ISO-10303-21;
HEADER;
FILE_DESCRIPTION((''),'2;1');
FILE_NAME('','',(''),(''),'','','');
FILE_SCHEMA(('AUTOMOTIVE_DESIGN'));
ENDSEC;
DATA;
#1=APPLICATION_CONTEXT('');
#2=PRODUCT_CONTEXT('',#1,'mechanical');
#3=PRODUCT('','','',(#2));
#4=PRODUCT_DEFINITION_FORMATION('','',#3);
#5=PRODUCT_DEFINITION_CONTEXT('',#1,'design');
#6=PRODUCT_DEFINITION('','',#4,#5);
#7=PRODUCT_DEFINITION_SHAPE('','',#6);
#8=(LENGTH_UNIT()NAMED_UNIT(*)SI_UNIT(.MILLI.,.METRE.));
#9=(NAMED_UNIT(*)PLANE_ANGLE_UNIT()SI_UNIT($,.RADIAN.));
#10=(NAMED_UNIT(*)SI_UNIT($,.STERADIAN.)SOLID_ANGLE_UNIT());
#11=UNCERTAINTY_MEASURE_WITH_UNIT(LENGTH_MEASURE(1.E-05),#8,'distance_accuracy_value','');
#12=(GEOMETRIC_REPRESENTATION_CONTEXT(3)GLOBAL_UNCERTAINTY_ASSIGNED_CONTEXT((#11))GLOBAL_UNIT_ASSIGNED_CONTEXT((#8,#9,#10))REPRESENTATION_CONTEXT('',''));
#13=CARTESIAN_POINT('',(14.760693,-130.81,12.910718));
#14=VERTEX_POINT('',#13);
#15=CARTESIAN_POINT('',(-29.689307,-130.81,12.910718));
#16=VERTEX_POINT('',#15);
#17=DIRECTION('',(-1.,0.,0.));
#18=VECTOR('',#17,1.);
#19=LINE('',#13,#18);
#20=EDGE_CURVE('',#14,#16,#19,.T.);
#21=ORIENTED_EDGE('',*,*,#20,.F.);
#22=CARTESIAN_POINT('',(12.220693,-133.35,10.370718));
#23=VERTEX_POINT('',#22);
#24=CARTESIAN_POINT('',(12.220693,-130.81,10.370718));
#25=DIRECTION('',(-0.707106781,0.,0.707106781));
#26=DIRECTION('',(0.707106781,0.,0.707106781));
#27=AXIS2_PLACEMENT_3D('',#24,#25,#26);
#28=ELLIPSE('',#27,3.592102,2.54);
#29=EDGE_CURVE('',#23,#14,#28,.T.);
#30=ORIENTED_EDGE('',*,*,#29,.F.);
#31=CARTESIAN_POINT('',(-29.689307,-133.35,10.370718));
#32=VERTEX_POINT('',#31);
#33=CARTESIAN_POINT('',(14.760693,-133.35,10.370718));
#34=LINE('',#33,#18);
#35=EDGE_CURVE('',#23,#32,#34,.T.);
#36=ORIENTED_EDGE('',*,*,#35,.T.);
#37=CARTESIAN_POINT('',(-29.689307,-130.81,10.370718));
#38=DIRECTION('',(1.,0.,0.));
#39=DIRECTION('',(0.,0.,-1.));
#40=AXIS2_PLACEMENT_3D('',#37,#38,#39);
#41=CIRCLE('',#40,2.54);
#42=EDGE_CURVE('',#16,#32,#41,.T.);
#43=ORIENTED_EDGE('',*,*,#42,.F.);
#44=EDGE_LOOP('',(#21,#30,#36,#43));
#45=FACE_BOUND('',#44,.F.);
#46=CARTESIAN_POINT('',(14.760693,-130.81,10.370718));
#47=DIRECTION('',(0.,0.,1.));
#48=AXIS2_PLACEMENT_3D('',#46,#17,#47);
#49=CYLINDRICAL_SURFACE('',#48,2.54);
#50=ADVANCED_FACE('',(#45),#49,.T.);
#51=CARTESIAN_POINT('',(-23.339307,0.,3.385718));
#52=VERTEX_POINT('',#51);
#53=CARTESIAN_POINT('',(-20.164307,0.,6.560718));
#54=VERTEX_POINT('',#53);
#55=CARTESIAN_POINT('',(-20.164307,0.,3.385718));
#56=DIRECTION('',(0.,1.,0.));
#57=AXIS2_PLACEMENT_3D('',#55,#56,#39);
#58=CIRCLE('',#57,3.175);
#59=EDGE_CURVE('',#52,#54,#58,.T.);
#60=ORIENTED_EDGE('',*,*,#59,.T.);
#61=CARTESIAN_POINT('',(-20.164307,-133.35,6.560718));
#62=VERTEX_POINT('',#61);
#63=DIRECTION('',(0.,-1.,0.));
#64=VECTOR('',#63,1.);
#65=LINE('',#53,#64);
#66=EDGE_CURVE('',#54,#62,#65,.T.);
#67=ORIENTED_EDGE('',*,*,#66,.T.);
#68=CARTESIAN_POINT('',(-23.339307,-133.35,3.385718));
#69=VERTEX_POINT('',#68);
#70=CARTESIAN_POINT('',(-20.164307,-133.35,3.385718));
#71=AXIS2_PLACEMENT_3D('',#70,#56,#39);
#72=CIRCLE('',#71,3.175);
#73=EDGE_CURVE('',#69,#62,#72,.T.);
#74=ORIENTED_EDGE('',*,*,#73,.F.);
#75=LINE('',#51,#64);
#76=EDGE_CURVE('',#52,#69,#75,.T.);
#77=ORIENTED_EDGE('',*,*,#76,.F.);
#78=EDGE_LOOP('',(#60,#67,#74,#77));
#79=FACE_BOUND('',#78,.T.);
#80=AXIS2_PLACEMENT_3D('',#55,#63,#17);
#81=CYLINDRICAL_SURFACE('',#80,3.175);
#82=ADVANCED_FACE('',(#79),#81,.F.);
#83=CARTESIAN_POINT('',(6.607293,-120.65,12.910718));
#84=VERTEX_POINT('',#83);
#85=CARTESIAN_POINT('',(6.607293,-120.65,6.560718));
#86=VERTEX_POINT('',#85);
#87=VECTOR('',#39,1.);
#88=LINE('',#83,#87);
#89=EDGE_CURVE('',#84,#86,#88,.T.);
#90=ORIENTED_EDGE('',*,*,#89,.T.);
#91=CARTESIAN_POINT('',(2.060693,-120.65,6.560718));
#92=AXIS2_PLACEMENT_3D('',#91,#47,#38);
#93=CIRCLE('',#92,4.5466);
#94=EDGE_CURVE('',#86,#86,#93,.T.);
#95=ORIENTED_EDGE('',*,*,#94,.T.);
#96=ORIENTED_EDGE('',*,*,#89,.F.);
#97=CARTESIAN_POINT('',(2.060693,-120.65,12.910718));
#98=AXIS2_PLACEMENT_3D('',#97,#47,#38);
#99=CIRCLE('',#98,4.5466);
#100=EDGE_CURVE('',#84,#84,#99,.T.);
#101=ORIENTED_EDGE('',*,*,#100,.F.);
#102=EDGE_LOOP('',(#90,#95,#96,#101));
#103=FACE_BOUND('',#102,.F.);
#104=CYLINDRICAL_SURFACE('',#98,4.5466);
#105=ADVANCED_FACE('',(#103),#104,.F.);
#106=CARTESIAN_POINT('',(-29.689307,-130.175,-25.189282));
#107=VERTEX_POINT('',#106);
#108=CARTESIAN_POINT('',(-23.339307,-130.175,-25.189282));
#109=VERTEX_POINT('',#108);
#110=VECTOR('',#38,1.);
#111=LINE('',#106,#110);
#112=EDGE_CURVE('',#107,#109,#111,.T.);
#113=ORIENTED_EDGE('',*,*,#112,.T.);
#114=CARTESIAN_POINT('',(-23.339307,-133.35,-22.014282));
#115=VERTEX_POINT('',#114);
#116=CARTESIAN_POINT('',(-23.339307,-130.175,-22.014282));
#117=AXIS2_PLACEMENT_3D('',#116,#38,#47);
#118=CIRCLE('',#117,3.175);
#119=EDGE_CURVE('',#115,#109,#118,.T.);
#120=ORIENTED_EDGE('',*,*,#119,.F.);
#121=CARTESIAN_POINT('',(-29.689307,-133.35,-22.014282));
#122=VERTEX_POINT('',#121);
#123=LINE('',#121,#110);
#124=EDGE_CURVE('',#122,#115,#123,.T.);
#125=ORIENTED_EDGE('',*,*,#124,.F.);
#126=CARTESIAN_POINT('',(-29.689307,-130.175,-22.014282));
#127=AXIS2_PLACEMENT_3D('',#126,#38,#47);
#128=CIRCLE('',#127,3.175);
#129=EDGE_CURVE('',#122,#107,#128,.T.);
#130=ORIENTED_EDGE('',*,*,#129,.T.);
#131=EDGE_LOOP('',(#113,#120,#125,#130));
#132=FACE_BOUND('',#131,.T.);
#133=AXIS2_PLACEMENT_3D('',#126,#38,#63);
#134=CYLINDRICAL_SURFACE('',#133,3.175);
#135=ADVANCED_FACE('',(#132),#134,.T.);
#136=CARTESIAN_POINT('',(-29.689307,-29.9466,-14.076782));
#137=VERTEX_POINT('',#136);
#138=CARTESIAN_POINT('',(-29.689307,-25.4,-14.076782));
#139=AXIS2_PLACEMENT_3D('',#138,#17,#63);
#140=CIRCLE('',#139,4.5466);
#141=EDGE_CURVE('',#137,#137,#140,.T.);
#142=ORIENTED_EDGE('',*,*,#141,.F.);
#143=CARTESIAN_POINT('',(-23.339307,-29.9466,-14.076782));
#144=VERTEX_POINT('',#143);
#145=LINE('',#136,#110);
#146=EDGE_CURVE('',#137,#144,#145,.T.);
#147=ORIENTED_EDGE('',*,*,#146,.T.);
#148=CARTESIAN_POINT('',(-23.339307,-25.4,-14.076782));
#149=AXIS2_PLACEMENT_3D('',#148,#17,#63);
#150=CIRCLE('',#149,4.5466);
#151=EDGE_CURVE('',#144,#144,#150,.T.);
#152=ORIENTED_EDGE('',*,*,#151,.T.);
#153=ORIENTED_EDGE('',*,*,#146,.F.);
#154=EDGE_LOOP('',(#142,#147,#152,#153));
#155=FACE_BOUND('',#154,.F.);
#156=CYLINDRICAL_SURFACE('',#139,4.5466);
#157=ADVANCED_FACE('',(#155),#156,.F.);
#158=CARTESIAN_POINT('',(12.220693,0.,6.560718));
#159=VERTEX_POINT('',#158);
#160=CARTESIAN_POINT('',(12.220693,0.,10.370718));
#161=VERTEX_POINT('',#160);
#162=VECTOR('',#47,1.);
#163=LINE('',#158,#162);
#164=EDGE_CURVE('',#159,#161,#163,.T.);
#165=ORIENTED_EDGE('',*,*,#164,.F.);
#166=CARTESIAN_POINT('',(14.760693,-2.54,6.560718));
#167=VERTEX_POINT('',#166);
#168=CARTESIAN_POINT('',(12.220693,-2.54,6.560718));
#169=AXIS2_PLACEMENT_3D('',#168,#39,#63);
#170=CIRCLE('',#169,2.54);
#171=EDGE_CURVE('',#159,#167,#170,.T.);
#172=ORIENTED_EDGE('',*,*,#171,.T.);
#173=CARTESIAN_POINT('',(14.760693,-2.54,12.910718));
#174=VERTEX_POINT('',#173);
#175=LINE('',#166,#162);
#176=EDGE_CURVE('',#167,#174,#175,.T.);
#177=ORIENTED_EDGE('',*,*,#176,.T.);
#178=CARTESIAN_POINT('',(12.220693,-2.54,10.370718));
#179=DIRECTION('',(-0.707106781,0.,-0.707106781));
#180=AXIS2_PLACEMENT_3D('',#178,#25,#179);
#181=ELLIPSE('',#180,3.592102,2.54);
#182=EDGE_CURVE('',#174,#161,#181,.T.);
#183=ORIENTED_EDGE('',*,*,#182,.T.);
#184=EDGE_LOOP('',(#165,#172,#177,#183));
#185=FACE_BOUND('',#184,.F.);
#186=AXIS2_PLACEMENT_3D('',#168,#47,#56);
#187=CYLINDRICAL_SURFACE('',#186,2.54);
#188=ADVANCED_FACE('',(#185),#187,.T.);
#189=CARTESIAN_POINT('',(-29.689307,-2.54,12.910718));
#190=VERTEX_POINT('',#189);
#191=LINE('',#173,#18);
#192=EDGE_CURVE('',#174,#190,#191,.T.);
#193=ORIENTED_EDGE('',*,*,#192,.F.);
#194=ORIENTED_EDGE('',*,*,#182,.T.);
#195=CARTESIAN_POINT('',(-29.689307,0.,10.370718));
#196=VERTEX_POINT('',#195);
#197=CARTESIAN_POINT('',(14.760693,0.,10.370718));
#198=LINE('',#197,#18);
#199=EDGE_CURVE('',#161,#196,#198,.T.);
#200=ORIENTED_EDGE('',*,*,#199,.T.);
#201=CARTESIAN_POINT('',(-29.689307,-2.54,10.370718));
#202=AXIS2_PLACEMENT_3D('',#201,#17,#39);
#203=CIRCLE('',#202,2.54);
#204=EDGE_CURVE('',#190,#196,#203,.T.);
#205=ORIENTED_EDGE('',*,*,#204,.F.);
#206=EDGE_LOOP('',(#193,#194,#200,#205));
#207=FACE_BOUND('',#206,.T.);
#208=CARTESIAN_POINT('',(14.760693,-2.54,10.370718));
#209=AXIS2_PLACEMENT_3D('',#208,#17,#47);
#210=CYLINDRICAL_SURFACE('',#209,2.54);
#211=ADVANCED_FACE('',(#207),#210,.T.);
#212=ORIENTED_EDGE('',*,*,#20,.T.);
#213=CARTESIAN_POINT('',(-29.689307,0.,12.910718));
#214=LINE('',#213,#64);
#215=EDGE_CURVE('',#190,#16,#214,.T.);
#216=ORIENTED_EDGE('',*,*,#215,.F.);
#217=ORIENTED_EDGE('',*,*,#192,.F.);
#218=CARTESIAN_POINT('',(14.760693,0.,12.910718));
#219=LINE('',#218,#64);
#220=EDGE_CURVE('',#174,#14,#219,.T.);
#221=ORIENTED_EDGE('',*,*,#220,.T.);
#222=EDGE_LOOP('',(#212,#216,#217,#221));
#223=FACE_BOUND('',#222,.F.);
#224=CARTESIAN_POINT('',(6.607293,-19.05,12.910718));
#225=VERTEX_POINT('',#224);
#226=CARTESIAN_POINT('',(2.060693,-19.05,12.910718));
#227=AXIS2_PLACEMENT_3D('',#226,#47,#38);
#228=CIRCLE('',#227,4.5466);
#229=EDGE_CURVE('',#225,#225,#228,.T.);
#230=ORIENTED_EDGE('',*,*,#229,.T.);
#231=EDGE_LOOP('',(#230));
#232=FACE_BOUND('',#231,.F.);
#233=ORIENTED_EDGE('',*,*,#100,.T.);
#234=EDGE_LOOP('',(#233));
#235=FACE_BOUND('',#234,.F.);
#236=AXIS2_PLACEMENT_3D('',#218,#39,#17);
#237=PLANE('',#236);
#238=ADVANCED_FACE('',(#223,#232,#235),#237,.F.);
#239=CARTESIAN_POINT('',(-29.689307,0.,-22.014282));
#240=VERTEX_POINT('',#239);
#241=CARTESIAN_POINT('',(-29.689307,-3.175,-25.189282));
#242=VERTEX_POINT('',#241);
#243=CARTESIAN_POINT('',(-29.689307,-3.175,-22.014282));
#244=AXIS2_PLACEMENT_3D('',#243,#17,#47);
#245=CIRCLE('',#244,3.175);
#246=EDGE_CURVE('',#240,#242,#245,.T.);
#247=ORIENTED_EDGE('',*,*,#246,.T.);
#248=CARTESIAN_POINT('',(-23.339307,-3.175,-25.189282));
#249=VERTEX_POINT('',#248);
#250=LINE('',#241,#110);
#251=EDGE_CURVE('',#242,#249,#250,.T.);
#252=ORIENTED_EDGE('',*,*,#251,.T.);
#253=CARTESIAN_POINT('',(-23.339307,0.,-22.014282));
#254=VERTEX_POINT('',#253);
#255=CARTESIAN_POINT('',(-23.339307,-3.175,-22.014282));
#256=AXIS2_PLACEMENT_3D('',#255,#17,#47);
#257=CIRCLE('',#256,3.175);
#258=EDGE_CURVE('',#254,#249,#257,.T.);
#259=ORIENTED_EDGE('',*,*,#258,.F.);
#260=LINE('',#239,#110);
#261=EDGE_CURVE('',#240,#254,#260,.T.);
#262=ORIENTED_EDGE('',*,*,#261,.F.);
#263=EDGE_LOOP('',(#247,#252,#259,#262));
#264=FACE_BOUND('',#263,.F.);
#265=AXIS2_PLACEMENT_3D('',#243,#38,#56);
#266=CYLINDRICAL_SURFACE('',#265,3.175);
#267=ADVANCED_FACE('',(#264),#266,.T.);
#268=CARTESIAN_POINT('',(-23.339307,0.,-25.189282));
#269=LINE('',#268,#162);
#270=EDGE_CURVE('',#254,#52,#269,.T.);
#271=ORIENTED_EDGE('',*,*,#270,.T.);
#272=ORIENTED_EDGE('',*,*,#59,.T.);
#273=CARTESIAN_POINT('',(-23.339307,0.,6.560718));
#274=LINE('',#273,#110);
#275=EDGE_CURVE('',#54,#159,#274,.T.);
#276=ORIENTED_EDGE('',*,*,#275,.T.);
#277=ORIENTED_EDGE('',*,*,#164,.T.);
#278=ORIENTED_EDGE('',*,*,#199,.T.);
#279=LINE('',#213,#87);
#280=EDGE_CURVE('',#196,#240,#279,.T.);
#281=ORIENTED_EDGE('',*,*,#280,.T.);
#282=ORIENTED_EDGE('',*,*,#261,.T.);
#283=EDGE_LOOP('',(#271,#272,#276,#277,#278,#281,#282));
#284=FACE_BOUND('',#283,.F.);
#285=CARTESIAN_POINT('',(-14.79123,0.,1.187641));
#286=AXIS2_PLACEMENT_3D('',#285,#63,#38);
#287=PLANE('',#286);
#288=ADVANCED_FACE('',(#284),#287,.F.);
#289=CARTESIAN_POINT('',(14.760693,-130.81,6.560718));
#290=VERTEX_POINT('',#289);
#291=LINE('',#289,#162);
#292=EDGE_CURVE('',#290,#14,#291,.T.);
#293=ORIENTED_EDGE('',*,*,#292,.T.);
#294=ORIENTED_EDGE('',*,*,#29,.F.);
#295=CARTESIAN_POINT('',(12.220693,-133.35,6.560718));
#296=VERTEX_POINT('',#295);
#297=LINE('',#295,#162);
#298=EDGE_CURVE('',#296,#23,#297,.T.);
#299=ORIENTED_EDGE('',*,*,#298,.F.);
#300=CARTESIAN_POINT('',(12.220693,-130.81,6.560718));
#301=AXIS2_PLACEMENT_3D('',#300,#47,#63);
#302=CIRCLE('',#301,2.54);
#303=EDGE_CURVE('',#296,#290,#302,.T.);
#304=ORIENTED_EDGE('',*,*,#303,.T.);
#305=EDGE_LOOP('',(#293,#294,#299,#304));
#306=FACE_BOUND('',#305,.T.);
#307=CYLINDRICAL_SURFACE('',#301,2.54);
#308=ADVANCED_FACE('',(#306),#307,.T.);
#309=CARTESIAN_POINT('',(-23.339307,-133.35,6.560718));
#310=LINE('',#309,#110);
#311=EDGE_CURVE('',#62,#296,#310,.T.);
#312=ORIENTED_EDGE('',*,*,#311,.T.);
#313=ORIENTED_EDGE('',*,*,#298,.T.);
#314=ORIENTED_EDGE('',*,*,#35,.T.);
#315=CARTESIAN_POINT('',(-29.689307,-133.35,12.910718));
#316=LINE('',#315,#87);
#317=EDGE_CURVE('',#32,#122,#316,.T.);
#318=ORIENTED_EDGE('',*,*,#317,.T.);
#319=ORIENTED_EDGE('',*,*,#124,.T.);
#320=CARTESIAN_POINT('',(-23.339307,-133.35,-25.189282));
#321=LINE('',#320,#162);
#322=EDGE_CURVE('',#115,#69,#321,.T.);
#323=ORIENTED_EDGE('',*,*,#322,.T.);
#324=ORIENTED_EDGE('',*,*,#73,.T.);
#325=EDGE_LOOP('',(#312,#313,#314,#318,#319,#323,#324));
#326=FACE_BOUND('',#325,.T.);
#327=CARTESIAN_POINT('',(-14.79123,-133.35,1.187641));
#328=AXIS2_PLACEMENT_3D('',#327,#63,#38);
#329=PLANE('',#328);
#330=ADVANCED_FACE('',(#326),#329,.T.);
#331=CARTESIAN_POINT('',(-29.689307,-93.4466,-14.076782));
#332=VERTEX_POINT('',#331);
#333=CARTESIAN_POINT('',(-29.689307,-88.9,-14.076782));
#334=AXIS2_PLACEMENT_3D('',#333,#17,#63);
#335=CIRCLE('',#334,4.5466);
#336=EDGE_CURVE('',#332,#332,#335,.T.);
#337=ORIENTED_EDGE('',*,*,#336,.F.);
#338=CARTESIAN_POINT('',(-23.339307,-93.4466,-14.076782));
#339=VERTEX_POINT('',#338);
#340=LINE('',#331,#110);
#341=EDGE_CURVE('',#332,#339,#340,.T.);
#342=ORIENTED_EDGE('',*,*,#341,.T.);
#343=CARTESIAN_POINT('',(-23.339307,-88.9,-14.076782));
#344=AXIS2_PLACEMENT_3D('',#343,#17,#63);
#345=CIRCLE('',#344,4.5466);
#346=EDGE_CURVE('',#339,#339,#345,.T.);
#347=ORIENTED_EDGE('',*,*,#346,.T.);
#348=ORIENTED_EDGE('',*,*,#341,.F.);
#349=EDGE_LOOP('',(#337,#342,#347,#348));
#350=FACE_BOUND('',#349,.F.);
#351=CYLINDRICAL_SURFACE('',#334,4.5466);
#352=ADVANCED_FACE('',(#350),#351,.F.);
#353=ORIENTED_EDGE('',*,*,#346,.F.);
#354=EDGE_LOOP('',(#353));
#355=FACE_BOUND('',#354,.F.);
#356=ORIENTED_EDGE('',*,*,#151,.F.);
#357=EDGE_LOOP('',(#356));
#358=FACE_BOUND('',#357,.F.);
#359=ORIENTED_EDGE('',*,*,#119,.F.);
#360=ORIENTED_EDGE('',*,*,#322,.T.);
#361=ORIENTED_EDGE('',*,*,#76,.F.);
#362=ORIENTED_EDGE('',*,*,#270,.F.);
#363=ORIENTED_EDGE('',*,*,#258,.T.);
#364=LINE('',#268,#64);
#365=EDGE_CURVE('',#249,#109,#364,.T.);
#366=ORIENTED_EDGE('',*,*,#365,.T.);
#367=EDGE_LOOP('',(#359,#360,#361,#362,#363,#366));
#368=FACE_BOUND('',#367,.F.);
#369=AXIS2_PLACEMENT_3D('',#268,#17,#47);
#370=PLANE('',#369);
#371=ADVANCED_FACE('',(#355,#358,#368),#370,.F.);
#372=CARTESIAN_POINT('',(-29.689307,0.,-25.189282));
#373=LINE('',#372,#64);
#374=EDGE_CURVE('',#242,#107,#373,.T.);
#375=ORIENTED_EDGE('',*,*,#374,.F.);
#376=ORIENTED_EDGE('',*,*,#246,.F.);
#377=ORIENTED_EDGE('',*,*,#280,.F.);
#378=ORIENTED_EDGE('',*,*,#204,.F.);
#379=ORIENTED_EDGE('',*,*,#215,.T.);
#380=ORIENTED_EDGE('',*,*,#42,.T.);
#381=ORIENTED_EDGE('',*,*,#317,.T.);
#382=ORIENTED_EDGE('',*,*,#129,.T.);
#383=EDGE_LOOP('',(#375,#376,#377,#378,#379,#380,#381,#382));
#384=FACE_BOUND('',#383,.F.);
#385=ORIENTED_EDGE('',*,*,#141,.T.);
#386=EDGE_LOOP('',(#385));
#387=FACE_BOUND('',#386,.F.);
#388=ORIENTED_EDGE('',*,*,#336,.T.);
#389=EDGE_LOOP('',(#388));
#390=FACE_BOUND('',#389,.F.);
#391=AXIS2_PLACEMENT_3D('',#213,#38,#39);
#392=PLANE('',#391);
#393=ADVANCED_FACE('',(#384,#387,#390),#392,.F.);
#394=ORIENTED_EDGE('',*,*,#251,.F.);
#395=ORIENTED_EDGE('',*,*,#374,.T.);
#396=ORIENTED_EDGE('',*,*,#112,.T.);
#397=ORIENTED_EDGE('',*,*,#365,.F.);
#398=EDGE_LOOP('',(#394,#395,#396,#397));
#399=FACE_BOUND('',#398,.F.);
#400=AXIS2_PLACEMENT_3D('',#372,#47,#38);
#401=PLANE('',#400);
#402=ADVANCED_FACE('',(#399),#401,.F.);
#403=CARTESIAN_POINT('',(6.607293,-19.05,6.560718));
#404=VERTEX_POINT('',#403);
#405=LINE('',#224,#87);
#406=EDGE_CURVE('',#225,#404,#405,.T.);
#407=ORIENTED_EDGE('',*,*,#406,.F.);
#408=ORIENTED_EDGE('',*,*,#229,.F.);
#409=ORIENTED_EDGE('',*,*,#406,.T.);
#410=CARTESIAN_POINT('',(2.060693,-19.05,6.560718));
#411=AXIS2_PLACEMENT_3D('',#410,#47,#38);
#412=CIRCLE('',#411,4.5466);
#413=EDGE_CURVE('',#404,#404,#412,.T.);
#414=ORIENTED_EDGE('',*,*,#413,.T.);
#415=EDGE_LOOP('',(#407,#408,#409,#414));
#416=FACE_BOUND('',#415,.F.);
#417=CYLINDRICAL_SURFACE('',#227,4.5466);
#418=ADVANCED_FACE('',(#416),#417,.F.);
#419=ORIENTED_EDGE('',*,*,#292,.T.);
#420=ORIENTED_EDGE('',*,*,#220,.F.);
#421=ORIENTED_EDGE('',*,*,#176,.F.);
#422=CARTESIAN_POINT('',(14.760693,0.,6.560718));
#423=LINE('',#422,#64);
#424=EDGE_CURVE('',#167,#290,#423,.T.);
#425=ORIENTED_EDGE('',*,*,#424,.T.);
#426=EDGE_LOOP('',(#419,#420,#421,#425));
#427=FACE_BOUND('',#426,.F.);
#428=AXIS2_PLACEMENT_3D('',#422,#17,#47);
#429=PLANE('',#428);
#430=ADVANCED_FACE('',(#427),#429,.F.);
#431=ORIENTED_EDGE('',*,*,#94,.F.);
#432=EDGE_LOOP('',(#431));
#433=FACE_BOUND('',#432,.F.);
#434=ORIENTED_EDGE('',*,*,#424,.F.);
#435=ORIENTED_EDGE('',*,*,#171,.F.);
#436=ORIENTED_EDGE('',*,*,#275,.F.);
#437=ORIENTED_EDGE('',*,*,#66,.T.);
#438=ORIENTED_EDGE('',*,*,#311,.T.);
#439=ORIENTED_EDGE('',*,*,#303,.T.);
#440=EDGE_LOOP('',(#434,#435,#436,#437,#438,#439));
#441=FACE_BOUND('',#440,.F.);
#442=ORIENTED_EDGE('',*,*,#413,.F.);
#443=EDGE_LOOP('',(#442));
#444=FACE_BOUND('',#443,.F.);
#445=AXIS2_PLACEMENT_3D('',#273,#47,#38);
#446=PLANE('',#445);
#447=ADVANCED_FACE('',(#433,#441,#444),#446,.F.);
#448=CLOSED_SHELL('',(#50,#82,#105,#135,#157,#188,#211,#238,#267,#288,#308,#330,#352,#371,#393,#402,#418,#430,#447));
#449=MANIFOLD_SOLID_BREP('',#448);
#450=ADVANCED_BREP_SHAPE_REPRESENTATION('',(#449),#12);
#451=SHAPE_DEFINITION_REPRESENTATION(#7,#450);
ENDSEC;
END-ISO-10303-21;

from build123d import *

# Parameters (mm, degrees)
F1_DEPTH = 133.35
F2_R     = 4.5466
F3_DEPTH = 25.4
F4_R     = 4.5466
F5_DEPTH = 25.4
F6_R     = 2.54
F7_R     = 3.175


with BuildPart() as f1:
    # F0 (on Front) → F1 (new body)
    with BuildSketch(Plane.XZ):
        Polygon((-29.6893073604, 12.910717619), (-29.6893073604, -25.189282381), (-23.3393073604, -25.189282381), (-23.3393073604, 6.560717619), (14.7606926396, 6.560717619), (14.7606926396, 12.910717619), align=None)
    extrude(amount=F1_DEPTH)

    # F2 (on face) → F3 (cut)
    with BuildSketch(Plane(origin=(-29.6893073604, 0, 0), x_dir=(0, -1, 0), z_dir=(-1, 0, 0))):
        with Locations((25.4, -14.076782381)):
            Circle(F2_R)
        with Locations((88.9, -14.076782381)):
            Circle(F2_R)
    extrude(amount=-F3_DEPTH, mode=Mode.SUBTRACT)

    # F4 (on face) → F5 (cut)
    with BuildSketch(Plane.XY.offset(12.910717619)):
        with Locations((2.0606926396, -120.65)):
            Circle(F4_R)
        with Locations((2.0606926396, -19.05)):
            Circle(F4_R)
    extrude(amount=-F5_DEPTH, mode=Mode.SUBTRACT)

    # F6
    f6_edges = [f1.edges().sort_by_distance(p)[0] for p in [
        (14.760693, -133.35, 9.735718),
        (-7.464307, -133.35, 12.910718),
        (-7.464307, 0, 12.910718),
        (14.760693, 0, 9.735718),
    ]]
    fillet(f6_edges, radius=F6_R)

    # F7
    f7_edges = [f1.edges().sort_by_distance(p)[0] for p in [
        (-26.514307, -133.35, -25.189282),
        (-26.514307, 0, -25.189282),
        (-23.339307, -66.675, 6.560718),
    ]]
    fillet(f7_edges, radius=F7_R)


solid = f1.part
